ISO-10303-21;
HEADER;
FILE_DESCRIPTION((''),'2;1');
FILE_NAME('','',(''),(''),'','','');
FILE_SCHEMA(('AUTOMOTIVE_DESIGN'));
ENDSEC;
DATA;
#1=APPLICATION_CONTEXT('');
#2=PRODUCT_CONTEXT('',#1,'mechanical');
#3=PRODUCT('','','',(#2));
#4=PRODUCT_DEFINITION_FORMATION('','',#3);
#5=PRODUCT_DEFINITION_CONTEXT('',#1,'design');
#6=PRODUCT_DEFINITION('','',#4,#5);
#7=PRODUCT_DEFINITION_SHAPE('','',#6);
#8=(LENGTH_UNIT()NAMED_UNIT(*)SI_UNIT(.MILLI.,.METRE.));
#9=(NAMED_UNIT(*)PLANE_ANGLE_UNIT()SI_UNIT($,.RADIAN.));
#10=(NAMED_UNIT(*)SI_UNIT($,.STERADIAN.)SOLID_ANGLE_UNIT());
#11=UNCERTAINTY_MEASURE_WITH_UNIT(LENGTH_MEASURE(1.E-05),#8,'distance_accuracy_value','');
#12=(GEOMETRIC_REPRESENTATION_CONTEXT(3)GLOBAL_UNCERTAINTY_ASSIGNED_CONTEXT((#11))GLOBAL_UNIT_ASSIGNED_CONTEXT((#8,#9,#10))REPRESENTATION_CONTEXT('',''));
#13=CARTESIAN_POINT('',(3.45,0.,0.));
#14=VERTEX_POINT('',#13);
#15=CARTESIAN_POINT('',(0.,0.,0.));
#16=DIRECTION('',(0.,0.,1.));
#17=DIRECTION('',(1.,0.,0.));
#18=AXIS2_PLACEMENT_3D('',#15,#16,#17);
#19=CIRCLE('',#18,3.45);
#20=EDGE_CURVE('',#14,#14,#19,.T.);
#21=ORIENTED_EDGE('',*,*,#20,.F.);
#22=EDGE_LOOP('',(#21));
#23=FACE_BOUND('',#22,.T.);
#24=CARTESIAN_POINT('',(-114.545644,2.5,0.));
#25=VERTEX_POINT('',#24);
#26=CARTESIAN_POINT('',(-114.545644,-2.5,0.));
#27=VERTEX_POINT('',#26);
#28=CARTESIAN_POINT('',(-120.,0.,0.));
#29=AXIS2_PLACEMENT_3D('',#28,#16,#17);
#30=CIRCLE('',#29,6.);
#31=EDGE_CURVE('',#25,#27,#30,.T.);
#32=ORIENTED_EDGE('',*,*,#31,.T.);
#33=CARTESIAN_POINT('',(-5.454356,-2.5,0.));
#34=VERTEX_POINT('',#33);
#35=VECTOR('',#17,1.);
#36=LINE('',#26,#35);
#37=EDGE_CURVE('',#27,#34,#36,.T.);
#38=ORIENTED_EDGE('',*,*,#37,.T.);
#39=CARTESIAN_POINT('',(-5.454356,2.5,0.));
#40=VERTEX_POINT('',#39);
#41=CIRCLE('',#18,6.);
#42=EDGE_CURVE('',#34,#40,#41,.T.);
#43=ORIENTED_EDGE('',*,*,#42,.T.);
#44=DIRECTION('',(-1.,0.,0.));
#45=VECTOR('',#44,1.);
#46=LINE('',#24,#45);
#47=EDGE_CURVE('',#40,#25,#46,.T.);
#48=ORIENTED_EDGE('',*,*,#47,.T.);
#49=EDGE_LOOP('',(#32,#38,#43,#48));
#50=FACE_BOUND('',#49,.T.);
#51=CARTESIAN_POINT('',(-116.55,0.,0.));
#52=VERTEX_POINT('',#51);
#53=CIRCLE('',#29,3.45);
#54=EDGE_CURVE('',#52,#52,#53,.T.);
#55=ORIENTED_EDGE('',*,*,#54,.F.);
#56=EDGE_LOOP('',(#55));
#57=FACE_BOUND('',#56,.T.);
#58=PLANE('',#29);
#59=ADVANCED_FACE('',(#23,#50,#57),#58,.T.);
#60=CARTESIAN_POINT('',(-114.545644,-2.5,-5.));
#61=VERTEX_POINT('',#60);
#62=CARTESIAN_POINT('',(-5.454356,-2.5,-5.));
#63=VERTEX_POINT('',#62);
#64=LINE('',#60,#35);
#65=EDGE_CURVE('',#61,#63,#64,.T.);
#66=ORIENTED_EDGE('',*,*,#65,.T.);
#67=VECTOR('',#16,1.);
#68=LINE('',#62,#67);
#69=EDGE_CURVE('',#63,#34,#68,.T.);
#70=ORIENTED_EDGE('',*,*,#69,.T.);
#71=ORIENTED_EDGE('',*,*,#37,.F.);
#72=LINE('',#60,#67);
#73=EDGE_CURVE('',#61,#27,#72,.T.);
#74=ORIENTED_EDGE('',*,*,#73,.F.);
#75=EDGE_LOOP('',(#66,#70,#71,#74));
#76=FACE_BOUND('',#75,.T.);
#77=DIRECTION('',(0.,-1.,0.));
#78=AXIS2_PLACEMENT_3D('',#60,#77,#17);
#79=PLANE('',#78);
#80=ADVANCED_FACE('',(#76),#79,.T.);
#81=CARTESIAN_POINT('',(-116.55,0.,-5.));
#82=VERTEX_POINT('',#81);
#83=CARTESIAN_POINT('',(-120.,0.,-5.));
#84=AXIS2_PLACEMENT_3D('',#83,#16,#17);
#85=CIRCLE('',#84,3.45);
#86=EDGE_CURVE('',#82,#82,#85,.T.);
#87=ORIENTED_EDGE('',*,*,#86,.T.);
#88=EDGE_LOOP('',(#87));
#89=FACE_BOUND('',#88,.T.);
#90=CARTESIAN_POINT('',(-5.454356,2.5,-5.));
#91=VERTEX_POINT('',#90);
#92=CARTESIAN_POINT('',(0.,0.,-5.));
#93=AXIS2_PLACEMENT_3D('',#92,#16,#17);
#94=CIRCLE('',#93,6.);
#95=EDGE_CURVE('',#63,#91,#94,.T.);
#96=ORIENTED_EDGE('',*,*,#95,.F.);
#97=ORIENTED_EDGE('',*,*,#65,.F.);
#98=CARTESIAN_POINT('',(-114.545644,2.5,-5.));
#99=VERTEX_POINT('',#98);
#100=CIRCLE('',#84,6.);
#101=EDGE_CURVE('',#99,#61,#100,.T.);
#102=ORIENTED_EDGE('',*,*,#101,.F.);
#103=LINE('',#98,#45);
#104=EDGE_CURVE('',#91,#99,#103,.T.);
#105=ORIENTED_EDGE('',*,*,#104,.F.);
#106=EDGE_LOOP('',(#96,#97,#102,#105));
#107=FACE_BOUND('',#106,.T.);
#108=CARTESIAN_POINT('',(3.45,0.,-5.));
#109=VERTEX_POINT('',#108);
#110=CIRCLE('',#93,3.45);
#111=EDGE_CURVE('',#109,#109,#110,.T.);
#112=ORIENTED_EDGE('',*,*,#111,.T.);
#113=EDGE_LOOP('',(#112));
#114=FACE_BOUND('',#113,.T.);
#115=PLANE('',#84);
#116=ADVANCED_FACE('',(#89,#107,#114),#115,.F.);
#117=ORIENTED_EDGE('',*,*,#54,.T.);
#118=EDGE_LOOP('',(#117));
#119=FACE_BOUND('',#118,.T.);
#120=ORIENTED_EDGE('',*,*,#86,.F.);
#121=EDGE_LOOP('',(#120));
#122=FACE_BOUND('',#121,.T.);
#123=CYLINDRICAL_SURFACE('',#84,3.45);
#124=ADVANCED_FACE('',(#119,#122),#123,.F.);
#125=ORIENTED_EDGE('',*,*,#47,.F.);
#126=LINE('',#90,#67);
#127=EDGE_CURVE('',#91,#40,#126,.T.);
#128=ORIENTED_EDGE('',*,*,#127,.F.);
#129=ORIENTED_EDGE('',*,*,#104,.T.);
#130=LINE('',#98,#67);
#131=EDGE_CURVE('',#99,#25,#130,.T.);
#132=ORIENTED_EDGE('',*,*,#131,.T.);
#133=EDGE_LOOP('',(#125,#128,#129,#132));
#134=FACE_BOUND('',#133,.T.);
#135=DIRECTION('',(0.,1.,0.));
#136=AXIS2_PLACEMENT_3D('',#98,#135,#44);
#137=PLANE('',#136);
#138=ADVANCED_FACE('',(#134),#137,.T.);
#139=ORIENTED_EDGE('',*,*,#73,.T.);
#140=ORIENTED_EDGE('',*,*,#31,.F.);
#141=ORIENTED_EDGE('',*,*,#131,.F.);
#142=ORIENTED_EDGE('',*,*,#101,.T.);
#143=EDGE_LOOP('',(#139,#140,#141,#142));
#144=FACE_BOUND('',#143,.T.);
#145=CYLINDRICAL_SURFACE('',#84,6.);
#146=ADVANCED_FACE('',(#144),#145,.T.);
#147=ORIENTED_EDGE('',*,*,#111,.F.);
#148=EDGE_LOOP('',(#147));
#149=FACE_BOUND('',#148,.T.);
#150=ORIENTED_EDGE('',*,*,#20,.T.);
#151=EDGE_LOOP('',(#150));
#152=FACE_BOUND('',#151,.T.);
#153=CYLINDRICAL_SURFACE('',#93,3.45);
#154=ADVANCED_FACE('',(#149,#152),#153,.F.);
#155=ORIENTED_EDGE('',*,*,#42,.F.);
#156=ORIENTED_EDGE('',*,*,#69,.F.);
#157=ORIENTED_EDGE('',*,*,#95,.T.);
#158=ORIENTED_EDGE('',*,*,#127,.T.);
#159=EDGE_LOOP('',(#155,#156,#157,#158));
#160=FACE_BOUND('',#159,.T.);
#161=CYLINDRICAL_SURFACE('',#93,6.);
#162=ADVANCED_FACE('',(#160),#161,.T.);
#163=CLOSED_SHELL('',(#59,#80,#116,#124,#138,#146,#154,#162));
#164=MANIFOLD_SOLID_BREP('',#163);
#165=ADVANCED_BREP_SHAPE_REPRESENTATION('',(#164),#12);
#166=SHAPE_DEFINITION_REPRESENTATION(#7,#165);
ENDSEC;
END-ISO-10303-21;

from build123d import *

# Parameters (mm, degrees)
SKETCH1_R          = 3.45
BASE_FLANGE1_DEPTH = 5


# Sheet-metal steps are written as plain solids
with BuildPart() as part:
    # Sketch1 → Base-Flange1 (new body)
    with BuildSketch(Plane.XY):
        with BuildLine():
            Line((-114.545643943, 2.5), (-5.454356057, 2.5))
            ThreePointArc((-5.454356057, 2.5), (6, 0), (-5.454356057, -2.5))
            Line((-5.454356057, -2.5), (-114.545643943, -2.5))
            ThreePointArc((-114.545643943, -2.5), (-126, 0), (-114.545643943, 2.5))
        make_face()
        Circle(SKETCH1_R, mode=Mode.SUBTRACT)
        with Locations((-120, 0)):
            Circle(SKETCH1_R, mode=Mode.SUBTRACT)
    extrude(amount=-BASE_FLANGE1_DEPTH)


solid = part.part
